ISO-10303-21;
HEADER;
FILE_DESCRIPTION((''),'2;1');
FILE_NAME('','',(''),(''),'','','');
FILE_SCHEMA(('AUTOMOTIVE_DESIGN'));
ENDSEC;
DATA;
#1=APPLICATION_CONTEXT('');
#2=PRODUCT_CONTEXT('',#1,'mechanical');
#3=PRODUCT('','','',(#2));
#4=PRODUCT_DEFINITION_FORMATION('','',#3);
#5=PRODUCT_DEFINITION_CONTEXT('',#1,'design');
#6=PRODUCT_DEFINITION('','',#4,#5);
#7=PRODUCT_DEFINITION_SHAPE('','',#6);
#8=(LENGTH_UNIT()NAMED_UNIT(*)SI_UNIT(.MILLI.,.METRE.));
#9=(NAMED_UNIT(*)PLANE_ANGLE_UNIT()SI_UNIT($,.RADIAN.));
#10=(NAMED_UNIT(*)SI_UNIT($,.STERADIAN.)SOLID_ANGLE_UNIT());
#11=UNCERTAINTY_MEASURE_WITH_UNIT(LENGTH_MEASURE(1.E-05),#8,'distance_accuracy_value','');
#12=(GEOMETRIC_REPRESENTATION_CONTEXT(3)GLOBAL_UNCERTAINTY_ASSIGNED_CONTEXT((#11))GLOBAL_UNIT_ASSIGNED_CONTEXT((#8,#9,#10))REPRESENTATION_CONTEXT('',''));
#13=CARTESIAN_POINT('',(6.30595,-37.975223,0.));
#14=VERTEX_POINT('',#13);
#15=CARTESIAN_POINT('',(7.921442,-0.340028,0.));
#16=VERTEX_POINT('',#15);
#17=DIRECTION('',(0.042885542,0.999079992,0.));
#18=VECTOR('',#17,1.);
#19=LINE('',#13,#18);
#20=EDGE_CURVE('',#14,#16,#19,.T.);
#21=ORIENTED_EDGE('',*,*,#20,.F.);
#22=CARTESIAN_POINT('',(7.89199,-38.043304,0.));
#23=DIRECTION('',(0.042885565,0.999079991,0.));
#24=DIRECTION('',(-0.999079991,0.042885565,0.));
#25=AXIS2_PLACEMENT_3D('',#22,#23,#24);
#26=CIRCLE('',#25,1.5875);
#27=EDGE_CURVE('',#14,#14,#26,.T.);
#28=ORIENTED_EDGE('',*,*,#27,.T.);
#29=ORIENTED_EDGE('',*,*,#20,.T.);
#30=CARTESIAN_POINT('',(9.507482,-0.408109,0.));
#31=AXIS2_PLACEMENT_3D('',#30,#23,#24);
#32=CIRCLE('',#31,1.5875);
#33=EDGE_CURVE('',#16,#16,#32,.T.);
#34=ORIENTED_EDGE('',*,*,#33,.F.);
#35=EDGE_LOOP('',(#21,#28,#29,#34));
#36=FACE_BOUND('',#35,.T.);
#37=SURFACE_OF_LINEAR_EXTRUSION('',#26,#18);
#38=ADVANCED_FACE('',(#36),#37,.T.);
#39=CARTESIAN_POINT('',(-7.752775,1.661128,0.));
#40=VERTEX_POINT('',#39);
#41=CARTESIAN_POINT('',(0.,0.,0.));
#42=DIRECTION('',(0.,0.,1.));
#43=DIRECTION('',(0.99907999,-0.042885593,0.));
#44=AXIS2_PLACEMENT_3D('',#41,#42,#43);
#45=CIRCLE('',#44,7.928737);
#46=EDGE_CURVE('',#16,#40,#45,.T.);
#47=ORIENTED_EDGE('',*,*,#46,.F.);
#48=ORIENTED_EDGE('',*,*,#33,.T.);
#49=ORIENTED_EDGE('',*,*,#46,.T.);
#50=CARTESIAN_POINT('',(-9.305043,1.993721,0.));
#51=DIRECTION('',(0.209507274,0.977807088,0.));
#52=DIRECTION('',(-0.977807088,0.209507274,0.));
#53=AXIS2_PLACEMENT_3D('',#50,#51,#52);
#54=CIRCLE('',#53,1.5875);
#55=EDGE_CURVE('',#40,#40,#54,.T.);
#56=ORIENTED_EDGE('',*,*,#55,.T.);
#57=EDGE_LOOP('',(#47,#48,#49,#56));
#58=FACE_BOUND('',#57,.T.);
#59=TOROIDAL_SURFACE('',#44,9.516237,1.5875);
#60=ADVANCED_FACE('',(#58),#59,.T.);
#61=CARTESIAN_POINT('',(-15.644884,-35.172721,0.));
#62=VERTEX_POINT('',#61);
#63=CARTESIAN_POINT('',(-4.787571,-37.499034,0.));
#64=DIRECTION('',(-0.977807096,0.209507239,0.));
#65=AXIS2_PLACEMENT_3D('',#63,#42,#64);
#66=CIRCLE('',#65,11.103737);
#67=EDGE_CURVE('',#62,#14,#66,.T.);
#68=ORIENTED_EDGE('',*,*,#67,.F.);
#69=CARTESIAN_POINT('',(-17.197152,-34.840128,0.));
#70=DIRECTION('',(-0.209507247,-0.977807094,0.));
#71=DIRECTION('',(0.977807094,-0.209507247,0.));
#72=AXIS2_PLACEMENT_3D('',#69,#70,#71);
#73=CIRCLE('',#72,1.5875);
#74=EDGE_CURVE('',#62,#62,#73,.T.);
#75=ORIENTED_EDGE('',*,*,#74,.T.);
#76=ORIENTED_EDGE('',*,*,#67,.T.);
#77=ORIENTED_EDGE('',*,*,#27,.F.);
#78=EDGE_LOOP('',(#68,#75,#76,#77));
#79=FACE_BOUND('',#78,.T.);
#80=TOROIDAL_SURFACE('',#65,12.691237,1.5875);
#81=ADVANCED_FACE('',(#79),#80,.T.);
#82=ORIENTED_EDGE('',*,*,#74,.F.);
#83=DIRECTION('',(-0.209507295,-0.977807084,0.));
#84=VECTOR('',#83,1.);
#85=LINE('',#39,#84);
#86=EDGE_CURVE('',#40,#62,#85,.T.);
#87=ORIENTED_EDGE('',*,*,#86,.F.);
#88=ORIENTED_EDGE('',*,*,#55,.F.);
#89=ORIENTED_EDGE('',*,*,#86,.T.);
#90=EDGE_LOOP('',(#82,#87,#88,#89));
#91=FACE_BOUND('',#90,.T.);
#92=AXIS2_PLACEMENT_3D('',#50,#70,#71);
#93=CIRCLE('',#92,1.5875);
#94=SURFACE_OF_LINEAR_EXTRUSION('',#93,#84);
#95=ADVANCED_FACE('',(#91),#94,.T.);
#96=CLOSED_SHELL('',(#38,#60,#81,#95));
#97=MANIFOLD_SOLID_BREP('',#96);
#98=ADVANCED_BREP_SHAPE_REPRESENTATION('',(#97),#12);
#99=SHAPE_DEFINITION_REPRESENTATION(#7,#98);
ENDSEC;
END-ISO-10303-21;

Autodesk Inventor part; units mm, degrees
ref_plane "YZ Plane" through (0, 0, 0) normal (1, 0, 0) x (0, 1, 0)
ref_plane "XZ Plane" through (0, 0, 0) normal (0, 1, 0) x (-1, 0, 0)
ref_plane "XY Plane" through (0, 0, 0) normal (0, 0, 1) x (1, 0, 0)
sketch "Sketch1" plane through (0, 0, 0) normal (0, 0, 1) x (1, 0, 0)
  circle A0 centre (0, 0) radius 2.54 construction
  circle A1 centre (-4.787571, -37.499034) radius 13.50645 construction
  circle A2 centre (0, 0) radius 10.33145 construction
  arc A3 (9.516237, -0.408485) -> (-9.313612, 1.995557) centre (0, 0) ccw
  arc A4 (-17.205721, -34.838292) -> (7.900745, -38.04368) centre (-4.787571, -37.499034) ccw
  line L0 (-9.313612, 1.995557) -> (-17.205721, -34.838292)
  line L1 (7.900745, -38.04368) -> (9.516237, -0.408485)
  point P0 (0, 0)
  dimension "d0" = 12.7
  dimension "d1" = 9.525
sketch "Sketch2" plane through (0, 0, 0) normal (0, 1, 0) x (-1, 0, 0)
  circle A0 centre (-9.516237, 0) radius 1.5875
  point P0 (0, 0)
  dimension "d2" = 3.175
sweep "Sweep1" add profiles "Sketch2" path "Sketch1"
properties part number "Pulley_Belt" material "Rubber, Silicone"
